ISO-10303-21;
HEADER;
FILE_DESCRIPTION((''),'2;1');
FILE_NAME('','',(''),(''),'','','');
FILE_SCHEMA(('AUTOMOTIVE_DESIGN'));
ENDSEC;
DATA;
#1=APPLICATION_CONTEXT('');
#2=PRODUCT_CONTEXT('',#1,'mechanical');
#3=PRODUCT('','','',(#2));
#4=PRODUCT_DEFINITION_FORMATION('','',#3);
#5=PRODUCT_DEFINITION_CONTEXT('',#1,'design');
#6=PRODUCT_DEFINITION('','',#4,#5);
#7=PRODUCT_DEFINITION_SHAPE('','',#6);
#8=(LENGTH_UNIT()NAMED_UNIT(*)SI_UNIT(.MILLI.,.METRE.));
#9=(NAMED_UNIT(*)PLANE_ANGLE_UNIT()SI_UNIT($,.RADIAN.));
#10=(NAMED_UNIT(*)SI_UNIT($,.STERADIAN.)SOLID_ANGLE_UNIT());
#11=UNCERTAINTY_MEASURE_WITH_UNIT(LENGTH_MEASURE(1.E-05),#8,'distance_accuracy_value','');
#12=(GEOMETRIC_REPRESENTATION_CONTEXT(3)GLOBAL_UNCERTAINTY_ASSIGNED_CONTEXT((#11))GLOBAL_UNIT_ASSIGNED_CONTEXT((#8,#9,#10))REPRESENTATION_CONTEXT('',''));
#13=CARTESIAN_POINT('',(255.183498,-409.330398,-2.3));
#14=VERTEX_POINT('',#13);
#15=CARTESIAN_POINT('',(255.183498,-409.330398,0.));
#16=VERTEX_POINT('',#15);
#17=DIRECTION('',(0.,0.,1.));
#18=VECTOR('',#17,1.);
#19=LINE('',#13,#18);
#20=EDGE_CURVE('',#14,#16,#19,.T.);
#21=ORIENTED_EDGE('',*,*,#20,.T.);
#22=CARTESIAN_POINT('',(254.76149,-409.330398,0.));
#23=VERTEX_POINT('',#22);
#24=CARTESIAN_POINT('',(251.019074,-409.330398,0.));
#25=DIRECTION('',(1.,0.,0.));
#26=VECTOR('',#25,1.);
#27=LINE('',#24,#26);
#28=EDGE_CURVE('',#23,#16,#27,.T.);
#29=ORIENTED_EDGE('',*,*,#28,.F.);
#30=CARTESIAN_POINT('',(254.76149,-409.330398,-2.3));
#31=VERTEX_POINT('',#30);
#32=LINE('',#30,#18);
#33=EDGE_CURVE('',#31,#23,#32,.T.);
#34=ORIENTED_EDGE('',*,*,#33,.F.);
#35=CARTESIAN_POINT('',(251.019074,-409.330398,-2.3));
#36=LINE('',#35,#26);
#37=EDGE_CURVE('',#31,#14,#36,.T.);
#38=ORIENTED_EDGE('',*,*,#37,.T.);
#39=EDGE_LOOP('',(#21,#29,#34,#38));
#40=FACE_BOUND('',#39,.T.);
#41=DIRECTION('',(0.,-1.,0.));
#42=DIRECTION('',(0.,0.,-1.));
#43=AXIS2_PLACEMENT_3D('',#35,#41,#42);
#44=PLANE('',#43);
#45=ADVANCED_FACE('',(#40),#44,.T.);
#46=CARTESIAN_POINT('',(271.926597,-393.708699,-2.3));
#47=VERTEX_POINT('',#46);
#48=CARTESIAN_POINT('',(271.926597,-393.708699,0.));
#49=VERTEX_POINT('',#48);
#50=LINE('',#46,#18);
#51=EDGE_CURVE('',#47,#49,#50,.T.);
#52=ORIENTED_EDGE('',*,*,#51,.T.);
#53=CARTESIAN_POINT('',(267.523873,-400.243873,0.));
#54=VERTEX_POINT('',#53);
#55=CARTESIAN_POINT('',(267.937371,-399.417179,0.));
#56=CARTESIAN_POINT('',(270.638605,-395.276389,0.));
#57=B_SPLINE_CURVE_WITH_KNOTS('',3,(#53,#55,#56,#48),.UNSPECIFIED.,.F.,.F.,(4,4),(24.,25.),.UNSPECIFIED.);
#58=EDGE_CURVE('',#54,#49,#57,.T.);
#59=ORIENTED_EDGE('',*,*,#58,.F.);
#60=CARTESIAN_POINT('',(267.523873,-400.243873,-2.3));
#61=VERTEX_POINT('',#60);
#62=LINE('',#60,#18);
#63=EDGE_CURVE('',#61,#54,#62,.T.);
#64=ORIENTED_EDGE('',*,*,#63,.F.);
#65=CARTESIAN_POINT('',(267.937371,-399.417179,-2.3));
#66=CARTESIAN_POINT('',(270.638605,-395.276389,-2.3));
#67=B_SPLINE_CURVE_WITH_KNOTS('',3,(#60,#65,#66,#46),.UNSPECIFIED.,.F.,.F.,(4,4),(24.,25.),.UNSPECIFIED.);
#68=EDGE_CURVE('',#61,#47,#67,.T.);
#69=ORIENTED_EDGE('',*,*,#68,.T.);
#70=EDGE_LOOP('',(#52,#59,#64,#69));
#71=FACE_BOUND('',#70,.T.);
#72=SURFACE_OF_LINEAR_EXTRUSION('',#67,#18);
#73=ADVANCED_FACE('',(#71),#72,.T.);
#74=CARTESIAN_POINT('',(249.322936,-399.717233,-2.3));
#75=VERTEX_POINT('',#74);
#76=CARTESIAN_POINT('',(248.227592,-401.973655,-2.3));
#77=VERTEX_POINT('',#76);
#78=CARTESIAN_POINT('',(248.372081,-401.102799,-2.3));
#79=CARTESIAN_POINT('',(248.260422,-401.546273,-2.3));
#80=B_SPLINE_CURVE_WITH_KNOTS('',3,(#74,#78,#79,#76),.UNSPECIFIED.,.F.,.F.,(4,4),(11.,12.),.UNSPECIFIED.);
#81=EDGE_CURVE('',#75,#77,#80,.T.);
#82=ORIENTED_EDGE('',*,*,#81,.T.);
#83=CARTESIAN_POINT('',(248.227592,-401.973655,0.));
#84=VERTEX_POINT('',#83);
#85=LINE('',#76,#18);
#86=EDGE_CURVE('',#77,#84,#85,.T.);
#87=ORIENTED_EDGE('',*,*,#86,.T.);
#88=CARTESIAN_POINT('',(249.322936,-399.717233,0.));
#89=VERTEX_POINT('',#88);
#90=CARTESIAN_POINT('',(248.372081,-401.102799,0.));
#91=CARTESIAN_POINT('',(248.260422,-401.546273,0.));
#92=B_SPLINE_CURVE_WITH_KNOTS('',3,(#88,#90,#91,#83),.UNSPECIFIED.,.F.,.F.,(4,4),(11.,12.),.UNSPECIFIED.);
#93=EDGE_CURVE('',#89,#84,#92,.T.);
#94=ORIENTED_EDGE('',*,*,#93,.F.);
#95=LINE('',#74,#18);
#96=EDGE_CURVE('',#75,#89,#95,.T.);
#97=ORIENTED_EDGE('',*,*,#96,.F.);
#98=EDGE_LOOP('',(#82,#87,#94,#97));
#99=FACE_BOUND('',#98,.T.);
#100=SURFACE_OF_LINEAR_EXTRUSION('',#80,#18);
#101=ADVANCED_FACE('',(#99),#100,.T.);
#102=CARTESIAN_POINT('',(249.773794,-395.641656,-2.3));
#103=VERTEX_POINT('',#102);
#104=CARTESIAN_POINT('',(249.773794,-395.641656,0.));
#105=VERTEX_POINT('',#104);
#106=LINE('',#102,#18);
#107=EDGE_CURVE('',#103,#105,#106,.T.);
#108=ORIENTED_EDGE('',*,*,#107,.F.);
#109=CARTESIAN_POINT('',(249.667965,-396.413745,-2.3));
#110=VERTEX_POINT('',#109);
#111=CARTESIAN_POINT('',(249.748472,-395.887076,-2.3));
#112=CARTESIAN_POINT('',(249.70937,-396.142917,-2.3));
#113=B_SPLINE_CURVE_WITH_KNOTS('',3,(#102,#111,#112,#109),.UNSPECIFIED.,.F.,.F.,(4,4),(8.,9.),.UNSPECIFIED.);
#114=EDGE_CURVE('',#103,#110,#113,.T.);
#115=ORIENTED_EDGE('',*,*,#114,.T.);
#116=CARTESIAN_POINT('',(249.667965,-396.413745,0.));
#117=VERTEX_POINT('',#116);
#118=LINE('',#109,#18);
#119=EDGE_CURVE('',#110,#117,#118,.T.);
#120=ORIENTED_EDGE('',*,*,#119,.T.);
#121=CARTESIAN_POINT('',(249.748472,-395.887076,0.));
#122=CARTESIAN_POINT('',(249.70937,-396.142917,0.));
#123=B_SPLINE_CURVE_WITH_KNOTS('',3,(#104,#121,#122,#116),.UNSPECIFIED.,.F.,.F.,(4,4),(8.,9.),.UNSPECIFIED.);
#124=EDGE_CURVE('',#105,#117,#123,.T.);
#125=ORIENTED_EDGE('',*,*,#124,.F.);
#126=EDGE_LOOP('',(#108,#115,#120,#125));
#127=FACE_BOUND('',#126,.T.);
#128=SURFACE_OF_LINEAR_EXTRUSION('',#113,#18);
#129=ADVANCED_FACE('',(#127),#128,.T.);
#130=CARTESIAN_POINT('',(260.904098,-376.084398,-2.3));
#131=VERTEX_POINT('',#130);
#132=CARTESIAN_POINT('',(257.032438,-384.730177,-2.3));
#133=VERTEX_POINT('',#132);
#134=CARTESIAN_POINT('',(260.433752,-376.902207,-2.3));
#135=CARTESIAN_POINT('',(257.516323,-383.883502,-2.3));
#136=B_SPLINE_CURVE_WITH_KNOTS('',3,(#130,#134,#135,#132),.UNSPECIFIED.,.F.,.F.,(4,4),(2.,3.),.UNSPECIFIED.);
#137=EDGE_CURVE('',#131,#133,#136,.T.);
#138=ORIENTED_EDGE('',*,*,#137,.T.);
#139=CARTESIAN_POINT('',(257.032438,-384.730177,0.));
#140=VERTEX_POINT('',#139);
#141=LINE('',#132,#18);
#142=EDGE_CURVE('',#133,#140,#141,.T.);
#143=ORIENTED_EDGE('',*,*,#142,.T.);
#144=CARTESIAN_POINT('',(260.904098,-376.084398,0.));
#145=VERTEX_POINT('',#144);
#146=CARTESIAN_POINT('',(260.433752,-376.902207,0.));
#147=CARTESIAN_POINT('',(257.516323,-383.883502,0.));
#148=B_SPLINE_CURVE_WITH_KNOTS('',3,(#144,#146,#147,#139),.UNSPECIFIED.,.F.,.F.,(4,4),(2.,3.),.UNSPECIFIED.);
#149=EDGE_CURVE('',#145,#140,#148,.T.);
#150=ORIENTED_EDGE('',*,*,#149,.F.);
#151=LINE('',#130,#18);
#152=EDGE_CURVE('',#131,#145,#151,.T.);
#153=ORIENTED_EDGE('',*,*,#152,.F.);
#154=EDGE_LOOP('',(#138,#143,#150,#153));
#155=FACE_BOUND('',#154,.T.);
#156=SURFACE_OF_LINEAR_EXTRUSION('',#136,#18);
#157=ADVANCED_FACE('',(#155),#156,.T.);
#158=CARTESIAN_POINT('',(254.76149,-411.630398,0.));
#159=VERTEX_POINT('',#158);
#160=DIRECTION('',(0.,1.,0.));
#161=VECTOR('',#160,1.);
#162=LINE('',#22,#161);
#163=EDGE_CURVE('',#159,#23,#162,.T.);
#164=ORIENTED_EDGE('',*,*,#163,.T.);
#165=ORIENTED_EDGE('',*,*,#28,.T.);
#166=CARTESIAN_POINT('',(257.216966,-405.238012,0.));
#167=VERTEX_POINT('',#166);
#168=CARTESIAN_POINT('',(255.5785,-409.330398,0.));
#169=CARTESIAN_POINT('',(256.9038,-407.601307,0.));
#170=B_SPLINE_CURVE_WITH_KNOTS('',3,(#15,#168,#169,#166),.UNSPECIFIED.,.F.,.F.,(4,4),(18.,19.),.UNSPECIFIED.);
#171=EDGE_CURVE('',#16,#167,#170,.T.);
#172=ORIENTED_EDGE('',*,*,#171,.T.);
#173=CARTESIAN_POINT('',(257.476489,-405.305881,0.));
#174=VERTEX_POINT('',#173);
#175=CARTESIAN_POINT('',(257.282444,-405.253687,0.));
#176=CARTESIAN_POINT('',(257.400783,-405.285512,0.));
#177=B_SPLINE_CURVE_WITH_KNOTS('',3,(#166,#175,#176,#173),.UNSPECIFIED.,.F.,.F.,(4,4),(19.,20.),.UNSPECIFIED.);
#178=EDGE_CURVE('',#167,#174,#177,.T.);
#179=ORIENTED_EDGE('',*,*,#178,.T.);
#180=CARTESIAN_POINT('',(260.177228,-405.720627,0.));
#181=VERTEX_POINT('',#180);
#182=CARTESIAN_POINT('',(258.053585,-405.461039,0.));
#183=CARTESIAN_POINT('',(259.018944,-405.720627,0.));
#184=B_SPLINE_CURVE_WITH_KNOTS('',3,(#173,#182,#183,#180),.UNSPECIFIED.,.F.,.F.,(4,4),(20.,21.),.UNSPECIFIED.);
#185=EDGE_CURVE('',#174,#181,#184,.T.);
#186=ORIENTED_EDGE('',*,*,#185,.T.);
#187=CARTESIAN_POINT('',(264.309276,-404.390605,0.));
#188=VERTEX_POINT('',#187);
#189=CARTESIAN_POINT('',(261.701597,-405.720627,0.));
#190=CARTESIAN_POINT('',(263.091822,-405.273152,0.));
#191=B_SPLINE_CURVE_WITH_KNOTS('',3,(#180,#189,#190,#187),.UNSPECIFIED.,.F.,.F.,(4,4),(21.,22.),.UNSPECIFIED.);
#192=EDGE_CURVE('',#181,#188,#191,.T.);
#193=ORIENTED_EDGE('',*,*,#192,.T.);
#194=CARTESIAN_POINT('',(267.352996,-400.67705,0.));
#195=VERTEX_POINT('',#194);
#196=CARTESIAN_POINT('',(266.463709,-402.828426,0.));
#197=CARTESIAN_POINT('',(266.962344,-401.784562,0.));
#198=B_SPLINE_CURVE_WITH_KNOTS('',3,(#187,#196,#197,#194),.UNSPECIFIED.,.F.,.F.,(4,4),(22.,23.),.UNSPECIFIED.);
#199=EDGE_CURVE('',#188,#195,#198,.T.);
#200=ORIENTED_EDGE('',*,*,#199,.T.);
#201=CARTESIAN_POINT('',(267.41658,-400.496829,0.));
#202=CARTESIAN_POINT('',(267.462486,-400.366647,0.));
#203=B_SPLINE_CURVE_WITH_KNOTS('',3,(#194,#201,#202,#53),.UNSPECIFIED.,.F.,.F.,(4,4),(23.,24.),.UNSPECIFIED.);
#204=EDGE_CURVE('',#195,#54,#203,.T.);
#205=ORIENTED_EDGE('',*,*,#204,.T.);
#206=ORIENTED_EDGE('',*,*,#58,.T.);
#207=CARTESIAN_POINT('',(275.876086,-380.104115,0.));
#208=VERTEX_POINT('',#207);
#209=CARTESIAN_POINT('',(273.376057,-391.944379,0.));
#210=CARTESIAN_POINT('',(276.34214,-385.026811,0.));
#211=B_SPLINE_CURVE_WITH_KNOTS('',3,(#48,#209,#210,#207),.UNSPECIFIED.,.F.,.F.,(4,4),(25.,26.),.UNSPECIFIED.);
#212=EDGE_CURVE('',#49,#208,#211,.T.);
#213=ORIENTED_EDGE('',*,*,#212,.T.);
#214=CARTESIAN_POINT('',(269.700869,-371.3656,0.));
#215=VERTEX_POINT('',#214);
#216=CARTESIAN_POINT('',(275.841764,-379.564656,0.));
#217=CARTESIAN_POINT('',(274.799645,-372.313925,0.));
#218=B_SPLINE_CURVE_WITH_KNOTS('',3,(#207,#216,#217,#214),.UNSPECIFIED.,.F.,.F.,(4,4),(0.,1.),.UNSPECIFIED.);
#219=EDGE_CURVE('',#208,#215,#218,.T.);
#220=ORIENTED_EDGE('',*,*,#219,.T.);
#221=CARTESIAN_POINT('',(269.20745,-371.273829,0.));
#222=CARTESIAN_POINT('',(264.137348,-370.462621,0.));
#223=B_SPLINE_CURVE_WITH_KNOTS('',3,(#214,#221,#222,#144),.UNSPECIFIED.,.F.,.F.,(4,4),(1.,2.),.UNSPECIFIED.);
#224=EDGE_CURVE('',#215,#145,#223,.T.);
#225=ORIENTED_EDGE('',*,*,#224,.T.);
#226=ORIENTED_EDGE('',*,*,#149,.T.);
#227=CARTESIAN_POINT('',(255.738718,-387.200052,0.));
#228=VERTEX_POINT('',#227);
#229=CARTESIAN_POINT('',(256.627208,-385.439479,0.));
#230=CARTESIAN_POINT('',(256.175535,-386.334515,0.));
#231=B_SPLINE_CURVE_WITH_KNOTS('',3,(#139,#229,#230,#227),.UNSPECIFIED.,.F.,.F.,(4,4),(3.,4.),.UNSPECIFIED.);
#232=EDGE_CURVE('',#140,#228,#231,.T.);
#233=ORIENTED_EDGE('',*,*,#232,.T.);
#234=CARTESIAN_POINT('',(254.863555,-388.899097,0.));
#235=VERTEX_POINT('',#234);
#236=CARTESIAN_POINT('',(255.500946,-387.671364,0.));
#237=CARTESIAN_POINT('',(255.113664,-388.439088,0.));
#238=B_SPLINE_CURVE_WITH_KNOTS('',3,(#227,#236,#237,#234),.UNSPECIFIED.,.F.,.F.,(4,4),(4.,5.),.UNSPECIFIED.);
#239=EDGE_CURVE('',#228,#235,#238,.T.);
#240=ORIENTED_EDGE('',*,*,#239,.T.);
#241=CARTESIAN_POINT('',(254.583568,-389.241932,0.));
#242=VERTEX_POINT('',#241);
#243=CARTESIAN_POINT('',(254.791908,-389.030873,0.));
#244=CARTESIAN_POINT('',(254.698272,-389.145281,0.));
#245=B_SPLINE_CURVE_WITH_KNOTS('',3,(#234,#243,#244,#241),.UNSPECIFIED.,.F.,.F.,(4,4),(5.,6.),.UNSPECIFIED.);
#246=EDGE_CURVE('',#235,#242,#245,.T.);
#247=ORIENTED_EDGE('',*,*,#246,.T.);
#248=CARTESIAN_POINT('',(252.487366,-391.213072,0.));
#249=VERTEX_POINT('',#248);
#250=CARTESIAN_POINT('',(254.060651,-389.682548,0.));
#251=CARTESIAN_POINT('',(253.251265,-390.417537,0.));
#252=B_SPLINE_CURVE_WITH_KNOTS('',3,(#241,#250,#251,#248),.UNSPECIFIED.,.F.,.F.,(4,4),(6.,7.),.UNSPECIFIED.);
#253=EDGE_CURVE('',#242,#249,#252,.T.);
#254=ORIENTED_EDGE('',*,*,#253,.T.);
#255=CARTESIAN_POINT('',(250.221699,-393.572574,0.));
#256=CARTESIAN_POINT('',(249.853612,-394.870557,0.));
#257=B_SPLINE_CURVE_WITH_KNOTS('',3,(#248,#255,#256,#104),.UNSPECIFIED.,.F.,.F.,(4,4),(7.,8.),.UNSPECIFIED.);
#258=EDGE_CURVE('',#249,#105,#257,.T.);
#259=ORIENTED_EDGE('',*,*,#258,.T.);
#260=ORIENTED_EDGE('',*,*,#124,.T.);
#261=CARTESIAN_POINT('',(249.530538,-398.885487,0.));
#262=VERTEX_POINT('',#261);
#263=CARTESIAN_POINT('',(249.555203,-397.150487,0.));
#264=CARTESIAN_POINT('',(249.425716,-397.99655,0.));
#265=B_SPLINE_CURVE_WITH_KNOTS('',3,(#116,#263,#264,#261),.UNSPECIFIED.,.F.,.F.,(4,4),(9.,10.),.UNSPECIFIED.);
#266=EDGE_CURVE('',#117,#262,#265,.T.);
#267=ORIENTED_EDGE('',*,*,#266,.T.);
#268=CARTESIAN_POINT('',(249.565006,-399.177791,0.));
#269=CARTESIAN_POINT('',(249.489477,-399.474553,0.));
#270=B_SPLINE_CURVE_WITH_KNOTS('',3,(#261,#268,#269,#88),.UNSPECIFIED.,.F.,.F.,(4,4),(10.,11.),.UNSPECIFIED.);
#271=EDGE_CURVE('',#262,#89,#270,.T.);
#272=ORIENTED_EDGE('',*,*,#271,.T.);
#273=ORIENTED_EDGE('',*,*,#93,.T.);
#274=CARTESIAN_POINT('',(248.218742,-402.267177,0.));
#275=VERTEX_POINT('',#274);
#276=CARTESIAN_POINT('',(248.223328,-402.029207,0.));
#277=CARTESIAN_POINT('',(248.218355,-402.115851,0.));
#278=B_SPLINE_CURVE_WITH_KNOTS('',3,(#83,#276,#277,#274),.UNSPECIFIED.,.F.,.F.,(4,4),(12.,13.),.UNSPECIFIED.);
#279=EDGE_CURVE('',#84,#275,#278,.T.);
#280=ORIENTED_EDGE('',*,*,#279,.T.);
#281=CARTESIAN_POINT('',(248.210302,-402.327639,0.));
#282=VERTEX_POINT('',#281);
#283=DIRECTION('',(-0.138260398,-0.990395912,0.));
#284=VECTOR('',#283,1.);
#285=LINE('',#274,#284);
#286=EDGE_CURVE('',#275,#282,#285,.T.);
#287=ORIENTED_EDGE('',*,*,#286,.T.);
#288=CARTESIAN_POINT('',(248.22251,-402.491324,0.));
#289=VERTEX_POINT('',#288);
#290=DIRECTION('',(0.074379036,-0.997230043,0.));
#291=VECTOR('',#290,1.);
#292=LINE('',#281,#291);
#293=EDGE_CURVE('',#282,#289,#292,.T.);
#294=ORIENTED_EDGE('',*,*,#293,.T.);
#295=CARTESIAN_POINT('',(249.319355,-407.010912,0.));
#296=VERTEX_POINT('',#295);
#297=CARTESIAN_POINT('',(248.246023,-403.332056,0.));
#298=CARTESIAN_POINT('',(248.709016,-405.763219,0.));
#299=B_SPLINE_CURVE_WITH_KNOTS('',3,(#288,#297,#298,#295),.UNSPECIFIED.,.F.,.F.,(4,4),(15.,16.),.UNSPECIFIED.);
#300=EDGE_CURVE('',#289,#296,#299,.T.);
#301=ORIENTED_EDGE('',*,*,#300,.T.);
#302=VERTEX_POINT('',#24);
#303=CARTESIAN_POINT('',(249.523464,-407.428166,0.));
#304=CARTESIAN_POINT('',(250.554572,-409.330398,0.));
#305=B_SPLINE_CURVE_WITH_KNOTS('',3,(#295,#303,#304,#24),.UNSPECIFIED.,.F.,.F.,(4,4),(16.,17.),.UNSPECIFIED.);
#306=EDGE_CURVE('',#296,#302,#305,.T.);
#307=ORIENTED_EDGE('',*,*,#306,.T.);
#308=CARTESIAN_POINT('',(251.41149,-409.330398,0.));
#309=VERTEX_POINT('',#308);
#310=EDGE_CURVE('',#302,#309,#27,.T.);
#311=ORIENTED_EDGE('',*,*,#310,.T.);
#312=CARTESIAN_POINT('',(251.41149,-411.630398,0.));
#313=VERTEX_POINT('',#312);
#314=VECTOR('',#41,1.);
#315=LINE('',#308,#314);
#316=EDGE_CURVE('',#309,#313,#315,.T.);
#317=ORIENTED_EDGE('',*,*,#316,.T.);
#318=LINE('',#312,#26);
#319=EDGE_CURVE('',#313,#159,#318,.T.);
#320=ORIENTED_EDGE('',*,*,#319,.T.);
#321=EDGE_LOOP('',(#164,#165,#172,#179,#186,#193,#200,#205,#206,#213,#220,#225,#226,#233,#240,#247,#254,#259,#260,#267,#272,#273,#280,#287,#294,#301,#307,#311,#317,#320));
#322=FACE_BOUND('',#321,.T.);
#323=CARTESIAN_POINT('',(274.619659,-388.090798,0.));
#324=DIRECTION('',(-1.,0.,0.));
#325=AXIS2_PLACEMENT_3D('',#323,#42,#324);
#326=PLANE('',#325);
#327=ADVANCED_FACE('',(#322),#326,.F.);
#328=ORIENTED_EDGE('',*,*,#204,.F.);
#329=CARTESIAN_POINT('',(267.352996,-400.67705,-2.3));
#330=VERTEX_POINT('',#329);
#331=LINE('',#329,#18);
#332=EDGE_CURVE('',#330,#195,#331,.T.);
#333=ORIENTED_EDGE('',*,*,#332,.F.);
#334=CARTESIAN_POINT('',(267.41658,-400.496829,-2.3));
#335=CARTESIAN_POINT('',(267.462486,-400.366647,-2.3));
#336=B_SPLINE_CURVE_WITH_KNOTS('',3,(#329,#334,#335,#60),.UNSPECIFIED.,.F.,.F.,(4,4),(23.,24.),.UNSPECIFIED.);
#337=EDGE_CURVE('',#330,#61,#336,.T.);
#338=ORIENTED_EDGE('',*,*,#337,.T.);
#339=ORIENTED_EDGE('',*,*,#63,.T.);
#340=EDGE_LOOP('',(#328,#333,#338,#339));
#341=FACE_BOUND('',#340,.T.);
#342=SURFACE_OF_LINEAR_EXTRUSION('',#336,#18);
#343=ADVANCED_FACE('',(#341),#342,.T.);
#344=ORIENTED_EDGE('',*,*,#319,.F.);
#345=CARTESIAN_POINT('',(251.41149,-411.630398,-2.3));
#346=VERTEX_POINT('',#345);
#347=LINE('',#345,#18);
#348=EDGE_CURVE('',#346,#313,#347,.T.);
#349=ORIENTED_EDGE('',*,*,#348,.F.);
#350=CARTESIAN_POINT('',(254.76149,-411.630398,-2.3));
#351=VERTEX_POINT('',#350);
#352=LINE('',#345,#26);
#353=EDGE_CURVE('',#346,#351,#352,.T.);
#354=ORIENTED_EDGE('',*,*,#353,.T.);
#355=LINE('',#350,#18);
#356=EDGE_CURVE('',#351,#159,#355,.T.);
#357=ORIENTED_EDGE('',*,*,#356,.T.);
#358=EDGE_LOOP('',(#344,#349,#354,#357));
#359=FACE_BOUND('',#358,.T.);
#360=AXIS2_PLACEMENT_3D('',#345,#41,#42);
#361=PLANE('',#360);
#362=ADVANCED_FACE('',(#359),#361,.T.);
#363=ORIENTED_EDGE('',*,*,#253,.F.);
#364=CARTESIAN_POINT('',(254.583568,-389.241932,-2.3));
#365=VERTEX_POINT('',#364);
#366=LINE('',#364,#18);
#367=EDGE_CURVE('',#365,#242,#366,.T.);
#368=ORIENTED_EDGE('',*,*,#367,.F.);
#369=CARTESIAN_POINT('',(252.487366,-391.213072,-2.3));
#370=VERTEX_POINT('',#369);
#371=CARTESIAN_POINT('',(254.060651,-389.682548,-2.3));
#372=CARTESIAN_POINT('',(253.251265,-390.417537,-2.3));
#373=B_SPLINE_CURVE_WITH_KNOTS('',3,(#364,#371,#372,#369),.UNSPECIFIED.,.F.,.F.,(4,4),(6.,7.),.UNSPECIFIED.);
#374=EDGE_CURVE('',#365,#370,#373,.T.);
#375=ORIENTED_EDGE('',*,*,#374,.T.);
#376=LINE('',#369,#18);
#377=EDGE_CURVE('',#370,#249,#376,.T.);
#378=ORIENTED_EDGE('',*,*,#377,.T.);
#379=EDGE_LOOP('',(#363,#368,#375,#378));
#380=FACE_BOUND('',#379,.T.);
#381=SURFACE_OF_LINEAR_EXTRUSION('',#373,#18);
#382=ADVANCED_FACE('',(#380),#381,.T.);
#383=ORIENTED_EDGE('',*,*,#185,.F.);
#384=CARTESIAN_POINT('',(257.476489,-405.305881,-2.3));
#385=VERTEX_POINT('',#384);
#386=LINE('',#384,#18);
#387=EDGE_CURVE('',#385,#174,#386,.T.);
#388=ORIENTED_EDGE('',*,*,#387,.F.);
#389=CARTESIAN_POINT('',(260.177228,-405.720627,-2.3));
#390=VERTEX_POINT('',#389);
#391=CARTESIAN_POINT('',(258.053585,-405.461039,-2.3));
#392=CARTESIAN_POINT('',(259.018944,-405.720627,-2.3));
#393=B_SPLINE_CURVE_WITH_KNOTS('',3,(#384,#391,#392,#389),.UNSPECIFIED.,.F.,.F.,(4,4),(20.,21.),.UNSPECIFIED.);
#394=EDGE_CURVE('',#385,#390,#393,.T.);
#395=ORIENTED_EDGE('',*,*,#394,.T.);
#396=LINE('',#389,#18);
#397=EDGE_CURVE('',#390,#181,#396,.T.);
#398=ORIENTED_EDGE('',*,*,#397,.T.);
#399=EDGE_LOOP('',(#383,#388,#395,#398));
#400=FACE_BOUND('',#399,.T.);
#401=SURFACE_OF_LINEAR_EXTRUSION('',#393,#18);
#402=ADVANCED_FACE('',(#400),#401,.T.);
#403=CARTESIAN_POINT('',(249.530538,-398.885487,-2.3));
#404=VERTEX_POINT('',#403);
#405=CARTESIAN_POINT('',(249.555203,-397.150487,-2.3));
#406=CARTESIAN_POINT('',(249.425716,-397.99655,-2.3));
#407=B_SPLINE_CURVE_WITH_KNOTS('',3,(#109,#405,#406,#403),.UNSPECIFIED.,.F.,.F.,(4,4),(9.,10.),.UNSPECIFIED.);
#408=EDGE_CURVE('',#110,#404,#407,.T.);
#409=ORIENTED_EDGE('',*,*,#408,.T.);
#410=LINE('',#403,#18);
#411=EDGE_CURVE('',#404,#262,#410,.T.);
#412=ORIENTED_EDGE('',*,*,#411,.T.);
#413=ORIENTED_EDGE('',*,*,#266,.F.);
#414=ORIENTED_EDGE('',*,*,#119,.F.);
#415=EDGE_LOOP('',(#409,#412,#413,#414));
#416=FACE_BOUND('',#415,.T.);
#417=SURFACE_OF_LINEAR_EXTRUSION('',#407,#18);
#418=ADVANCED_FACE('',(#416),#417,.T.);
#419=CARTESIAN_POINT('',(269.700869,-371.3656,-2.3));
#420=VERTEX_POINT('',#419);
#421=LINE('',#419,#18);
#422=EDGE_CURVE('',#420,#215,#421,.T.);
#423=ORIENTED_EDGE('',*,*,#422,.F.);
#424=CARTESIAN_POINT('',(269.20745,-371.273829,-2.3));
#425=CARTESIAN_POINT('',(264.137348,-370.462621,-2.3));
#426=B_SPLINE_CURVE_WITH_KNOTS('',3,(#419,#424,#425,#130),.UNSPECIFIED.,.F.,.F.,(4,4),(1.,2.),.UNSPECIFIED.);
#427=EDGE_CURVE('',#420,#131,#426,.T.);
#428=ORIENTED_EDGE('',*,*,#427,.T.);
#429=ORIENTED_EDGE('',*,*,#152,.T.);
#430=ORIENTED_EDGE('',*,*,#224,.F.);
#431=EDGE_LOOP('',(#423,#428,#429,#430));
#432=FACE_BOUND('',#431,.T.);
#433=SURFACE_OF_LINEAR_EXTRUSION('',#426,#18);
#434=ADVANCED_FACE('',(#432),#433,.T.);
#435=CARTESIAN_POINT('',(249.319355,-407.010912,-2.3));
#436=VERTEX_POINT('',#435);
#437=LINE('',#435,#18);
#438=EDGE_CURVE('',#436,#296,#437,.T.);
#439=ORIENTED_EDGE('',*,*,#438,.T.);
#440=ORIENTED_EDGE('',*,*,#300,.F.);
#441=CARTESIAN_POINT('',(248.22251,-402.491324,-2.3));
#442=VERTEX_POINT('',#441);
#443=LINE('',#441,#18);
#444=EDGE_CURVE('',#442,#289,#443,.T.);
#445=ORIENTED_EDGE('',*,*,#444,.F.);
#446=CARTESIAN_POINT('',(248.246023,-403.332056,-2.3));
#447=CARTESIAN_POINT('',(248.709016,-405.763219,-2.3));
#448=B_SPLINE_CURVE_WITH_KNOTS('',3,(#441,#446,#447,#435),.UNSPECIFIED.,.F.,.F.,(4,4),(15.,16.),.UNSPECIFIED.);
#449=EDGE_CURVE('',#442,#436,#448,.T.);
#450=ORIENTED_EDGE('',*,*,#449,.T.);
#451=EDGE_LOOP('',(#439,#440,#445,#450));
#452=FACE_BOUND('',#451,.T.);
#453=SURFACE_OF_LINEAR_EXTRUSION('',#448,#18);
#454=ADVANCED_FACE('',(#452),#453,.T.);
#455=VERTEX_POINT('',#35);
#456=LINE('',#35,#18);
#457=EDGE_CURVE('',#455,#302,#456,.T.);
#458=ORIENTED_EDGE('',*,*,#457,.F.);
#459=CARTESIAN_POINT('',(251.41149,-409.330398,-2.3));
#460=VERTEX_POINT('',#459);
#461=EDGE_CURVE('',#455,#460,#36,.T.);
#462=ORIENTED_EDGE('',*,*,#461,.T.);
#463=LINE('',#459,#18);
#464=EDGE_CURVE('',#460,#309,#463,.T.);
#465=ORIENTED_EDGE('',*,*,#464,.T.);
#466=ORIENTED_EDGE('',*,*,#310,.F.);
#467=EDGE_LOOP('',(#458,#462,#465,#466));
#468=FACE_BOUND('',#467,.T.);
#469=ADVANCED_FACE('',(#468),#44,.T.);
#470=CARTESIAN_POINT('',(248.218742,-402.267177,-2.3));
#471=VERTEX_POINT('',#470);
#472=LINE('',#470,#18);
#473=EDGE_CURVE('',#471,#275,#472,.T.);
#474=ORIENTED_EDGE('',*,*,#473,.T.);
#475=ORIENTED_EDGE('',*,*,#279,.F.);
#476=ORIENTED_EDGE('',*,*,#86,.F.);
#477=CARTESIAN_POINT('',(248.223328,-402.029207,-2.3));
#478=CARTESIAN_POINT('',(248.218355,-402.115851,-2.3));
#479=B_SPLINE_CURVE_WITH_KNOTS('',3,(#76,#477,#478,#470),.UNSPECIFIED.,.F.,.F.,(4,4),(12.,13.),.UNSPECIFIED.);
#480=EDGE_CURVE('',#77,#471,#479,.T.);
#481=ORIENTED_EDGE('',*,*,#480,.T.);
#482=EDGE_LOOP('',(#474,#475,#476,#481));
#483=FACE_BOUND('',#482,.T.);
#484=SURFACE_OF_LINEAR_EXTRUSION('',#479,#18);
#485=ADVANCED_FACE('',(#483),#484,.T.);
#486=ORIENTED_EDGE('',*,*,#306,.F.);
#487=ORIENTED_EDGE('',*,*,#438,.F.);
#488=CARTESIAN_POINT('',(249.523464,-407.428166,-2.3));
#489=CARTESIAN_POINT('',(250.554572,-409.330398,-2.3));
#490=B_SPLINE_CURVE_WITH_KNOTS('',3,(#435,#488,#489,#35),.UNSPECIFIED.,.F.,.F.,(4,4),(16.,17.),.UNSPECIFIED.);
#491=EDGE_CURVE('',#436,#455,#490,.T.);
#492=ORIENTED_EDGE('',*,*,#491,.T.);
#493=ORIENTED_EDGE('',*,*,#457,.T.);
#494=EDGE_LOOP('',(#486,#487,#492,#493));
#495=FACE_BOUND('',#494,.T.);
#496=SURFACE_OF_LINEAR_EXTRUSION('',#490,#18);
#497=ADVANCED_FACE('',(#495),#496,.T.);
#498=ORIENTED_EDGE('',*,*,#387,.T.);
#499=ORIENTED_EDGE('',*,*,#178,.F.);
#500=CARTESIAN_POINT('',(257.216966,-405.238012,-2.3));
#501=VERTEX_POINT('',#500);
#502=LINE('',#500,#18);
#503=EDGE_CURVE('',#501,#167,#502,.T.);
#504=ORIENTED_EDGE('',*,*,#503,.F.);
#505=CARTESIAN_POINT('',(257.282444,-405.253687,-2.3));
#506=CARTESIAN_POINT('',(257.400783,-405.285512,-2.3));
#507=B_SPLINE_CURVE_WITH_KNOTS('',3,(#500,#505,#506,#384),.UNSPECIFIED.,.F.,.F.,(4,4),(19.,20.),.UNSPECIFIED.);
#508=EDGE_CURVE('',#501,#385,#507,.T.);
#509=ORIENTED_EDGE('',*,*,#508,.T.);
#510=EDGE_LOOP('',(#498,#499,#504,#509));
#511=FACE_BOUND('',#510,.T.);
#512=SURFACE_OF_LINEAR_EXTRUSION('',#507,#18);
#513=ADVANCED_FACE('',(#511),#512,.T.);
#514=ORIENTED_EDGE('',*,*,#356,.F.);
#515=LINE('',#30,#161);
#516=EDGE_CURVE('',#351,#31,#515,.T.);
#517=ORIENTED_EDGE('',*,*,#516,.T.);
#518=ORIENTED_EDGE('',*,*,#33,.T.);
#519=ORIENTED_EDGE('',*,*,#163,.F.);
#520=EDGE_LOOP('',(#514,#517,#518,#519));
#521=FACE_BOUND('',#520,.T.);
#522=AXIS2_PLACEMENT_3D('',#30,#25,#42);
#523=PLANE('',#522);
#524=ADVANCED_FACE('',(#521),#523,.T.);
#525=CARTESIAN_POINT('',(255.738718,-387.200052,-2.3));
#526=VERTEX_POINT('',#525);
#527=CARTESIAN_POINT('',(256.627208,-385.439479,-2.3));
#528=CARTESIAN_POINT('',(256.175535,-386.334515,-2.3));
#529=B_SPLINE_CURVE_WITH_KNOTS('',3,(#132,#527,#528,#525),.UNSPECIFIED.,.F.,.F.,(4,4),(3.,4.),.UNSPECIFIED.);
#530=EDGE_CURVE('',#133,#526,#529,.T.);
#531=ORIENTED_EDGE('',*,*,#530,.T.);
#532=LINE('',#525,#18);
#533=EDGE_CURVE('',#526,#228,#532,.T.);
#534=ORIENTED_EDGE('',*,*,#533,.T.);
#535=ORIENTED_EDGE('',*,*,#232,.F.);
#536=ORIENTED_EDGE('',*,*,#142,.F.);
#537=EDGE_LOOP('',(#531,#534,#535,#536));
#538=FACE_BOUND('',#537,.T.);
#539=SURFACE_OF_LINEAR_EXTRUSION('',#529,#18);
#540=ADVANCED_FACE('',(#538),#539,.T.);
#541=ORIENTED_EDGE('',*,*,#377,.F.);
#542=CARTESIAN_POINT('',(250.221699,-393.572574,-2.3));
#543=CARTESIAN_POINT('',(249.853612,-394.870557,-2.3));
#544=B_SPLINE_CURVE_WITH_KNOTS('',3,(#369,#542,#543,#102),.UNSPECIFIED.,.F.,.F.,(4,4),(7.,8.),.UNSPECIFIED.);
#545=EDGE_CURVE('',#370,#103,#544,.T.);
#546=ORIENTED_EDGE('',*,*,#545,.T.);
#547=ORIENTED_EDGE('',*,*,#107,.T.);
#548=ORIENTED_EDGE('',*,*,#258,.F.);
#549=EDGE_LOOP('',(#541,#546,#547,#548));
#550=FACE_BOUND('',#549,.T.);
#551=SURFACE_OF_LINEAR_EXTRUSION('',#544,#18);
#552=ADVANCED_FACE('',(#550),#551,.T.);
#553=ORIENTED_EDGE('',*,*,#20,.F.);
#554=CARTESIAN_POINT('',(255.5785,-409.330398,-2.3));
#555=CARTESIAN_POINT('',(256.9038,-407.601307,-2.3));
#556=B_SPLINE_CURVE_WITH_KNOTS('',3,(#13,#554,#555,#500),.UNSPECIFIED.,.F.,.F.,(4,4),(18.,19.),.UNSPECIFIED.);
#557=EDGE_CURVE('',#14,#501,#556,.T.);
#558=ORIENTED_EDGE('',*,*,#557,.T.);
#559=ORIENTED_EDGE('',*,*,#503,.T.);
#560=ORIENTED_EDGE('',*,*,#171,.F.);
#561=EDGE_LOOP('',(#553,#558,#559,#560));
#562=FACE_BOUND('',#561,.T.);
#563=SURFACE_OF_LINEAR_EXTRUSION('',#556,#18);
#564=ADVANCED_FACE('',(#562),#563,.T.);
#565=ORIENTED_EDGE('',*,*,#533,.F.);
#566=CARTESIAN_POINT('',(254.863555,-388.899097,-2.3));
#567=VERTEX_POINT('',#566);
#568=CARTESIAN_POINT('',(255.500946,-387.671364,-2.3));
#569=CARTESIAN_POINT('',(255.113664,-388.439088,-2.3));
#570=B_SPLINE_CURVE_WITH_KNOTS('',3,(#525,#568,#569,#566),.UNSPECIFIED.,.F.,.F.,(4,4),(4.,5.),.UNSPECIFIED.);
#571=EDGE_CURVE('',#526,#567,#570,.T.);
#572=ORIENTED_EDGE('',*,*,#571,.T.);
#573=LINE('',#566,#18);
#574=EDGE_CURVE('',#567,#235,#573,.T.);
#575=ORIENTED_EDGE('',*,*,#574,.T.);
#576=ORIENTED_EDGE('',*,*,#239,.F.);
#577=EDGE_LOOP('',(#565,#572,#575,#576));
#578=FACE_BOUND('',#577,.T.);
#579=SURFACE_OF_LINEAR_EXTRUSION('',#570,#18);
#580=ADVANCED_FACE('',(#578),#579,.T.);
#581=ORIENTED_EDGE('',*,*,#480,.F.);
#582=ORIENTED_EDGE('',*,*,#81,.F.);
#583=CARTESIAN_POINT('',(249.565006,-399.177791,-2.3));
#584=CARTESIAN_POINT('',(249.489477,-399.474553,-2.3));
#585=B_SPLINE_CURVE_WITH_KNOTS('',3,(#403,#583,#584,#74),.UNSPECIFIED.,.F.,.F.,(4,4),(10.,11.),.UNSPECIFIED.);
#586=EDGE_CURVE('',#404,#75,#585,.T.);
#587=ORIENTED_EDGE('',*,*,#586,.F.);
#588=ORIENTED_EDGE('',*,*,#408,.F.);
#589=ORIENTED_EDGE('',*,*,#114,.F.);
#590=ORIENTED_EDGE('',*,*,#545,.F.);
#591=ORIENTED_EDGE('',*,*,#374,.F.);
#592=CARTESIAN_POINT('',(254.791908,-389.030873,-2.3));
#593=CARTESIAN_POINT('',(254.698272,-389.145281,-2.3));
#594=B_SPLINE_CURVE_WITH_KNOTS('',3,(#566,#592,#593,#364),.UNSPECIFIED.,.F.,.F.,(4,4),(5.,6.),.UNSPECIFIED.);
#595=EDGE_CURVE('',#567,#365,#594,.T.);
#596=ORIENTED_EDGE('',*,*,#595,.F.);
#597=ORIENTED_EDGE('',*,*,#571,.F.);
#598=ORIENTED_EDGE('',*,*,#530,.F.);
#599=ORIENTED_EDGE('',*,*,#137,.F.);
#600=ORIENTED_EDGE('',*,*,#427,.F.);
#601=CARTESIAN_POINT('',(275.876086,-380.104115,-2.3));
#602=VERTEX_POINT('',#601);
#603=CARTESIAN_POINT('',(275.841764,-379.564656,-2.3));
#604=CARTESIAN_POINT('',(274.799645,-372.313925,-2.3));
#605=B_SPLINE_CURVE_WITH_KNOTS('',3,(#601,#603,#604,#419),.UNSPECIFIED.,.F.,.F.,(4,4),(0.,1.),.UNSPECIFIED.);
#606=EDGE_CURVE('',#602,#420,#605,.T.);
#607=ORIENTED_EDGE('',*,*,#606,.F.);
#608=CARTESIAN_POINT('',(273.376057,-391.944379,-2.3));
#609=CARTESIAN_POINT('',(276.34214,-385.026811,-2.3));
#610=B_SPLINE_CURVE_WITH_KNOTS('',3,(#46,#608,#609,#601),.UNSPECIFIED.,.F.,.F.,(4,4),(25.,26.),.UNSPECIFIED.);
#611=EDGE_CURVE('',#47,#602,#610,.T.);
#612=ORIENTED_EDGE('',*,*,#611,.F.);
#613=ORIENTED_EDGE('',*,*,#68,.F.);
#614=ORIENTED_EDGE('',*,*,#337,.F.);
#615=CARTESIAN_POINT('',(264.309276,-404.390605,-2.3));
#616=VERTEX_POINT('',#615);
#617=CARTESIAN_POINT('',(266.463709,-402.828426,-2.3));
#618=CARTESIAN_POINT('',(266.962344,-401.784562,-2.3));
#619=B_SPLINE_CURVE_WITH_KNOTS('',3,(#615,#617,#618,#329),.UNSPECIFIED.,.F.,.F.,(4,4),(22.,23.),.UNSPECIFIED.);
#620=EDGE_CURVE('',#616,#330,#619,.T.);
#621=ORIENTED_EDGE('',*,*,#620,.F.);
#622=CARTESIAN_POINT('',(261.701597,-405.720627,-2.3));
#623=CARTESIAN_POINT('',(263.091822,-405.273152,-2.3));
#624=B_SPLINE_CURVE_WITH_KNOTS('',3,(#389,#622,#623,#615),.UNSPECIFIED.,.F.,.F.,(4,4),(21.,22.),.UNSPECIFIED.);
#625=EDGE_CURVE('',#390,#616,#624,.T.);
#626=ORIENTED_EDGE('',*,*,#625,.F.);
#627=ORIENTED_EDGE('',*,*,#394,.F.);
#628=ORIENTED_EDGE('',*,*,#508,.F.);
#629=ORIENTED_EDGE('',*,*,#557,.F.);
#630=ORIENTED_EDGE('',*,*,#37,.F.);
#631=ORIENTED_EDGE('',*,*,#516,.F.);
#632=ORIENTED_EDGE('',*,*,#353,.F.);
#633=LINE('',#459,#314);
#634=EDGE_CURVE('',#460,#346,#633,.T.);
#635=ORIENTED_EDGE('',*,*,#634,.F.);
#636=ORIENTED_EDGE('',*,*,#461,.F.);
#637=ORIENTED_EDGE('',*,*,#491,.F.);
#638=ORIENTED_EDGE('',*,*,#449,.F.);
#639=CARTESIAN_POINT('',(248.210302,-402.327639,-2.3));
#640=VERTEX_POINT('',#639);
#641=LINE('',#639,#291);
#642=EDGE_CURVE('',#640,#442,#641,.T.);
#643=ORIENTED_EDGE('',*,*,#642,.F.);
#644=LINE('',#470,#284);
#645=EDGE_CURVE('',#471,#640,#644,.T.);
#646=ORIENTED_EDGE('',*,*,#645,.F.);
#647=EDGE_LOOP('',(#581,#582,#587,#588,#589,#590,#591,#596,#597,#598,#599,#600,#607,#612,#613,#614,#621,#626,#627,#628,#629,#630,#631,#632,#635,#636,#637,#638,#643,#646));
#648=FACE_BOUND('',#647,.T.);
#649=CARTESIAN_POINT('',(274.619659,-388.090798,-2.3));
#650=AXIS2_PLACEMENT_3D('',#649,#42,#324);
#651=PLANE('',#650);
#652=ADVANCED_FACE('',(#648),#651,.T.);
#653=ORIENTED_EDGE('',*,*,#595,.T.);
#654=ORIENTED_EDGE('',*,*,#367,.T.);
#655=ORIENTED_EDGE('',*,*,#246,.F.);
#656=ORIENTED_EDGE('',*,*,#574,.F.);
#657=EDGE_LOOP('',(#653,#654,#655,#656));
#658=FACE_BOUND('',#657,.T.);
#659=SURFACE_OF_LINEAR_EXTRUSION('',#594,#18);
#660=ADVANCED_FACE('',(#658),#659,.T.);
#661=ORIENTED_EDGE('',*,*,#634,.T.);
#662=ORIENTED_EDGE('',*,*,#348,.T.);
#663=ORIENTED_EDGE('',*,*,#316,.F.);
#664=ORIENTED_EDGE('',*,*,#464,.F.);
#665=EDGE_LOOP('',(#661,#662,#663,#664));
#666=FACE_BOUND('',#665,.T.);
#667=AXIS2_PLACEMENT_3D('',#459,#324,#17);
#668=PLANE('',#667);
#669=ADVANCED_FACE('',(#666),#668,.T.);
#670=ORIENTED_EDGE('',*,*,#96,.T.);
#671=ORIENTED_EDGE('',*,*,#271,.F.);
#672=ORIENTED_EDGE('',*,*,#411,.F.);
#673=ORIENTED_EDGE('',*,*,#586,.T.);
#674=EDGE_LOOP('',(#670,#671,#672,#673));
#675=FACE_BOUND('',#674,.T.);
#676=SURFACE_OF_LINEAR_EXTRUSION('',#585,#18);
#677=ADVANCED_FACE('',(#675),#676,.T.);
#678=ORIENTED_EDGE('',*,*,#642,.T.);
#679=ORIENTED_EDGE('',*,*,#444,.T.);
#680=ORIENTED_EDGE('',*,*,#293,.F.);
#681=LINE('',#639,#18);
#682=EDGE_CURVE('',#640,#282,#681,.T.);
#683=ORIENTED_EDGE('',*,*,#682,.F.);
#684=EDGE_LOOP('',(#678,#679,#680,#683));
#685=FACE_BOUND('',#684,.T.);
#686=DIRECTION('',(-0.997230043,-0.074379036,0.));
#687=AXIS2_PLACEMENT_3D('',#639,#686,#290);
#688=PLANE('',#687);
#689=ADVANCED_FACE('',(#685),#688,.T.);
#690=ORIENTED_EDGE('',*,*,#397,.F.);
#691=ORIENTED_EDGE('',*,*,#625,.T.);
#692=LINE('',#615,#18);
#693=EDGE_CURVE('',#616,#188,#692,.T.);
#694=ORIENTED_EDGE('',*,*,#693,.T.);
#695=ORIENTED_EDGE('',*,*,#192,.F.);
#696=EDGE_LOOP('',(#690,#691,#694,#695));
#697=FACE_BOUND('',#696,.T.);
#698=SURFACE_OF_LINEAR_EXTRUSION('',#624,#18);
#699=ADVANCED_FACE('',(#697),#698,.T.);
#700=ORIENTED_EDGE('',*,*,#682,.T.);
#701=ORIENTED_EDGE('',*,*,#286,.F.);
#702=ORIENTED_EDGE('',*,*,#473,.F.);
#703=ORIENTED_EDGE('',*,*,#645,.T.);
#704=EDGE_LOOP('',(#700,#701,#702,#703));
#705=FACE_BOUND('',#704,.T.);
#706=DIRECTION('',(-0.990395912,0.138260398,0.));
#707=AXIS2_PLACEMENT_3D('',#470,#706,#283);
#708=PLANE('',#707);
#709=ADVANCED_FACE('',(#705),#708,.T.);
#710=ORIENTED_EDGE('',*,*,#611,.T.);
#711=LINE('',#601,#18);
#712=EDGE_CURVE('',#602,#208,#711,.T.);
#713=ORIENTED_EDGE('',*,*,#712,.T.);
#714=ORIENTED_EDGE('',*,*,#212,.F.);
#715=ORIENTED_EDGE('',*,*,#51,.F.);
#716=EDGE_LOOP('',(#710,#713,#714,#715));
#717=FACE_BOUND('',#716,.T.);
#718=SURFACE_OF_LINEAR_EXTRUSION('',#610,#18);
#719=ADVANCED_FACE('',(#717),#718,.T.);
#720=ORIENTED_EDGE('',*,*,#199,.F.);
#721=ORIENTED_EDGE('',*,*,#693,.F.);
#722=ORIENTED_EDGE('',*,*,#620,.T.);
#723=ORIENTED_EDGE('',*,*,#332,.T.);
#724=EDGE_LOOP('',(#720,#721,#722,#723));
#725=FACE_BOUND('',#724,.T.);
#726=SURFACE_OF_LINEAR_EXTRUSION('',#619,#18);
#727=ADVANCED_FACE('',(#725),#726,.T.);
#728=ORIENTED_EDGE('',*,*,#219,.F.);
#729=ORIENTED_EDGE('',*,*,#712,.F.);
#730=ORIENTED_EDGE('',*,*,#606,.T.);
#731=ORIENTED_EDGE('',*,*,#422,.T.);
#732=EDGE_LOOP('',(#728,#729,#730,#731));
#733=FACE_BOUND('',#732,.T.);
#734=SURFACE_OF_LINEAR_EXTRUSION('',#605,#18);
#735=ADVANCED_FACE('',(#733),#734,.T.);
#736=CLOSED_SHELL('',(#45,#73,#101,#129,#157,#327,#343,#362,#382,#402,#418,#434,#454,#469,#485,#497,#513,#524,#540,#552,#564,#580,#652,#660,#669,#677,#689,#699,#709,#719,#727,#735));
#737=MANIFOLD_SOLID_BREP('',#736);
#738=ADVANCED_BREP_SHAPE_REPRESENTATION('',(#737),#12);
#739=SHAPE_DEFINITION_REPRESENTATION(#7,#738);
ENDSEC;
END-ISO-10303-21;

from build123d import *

# Parameters (mm, degrees)
BASE_FLANGE1_DEPTH = 2.3
SKETCH6_W          = 3.35
SKETCH6_H          = 2.3
TAB1_DEPTH         = 2.3


# Sheet-metal steps are written as plain solids
with BuildPart() as part:
    # Model → Base-Flange1 (new body)
    with BuildSketch(Plane.XY):
        with BuildLine():
            Line((248.218742139, -402.267177227), (248.210301655, -402.327638653))
            Line((248.210301655, -402.327638653), (248.222510212, -402.491323752))
            add(Edge.make_bspline(
                [(248.222510212, -402.491323752), (248.246022989, -403.332056241), (248.70901563, -405.763218763), (249.319354503, -407.010912211)],
                knots=[15, 15, 15, 15, 16, 16, 16, 16], degree=3))
            add(Edge.make_bspline(
                [(249.319354503, -407.010912211), (249.523464167, -407.428166136), (250.554572065, -409.330398118), (251.019073512, -409.330398118)],
                knots=[16, 16, 16, 16, 17, 17, 17, 17], degree=3))
            Line((251.019073512, -409.330398118), (255.183497951, -409.330398118))
            add(Edge.make_bspline(
                [(255.183497951, -409.330398118), (255.57849992, -409.330398118), (256.903800339, -407.601307276), (257.216965505, -405.238012255)],
                knots=[18, 18, 18, 18, 19, 19, 19, 19], degree=3))
            add(Edge.make_bspline(
                [(257.216965505, -405.238012255), (257.282443851, -405.253687439), (257.400782881, -405.285511509), (257.476488854, -405.305880636)],
                knots=[19, 19, 19, 19, 20, 20, 20, 20], degree=3))
            add(Edge.make_bspline(
                [(257.476488854, -405.305880636), (258.053585412, -405.461039124), (259.01894423, -405.720627069), (260.177228396, -405.720627069)],
                knots=[20, 20, 20, 20, 21, 21, 21, 21], degree=3))
            add(Edge.make_bspline(
                [(260.177228396, -405.720627069), (261.701597021, -405.720627069), (263.091822241, -405.273152229), (264.309275921, -404.390604893)],
                knots=[21, 21, 21, 21, 22, 22, 22, 22], degree=3))
            add(Edge.make_bspline(
                [(264.309275921, -404.390604893), (266.463709447, -402.828426345), (266.962343955, -401.784562413), (267.352996251, -400.677050342)],
                knots=[22, 22, 22, 22, 23, 23, 23, 23], degree=3))
            add(Edge.make_bspline(
                [(267.352996251, -400.677050342), (267.416579794, -400.496828784), (267.462485692, -400.366647239), (267.523872987, -400.243872648)],
                knots=[23, 23, 23, 23, 24, 24, 24, 24], degree=3))
            add(Edge.make_bspline(
                [(267.523872987, -400.243872648), (267.937370572, -399.417178923), (270.638605347, -395.276389468), (271.926597358, -393.708698768)],
                knots=[24, 24, 24, 24, 25, 25, 25, 25], degree=3))
            add(Edge.make_bspline(
                [(271.926597358, -393.708698768), (273.376056688, -391.944379242), (276.34214037, -385.026811485), (275.876086264, -380.104114983)],
                knots=[25, 25, 25, 25, 26, 26, 26, 26], degree=3))
            add(Edge.make_bspline(
                [(275.876086264, -380.104114983), (275.8417645, -379.564656094), (274.799645491, -372.313924687), (269.70086935, -371.365600484)],
                knots=[0, 0, 0, 0, 1, 1, 1, 1], degree=3))
            add(Edge.make_bspline(
                [(269.70086935, -371.365600484), (269.207450344, -371.273829209), (264.137348452, -370.462620652), (260.904098088, -376.084398314)],
                knots=[1, 1, 1, 1, 2, 2, 2, 2], degree=3))
            add(Edge.make_bspline(
                [(260.904098088, -376.084398314), (260.433751909, -376.902207435), (257.516322771, -383.883501762), (257.032437578, -384.730177041)],
                knots=[2, 2, 2, 2, 3, 3, 3, 3], degree=3))
            add(Edge.make_bspline(
                [(257.032437578, -384.730177041), (256.627208222, -385.439479138), (256.175534672, -386.334514945), (255.738718096, -387.200052122)],
                knots=[3, 3, 3, 3, 4, 4, 4, 4], degree=3))
            add(Edge.make_bspline(
                [(255.738718096, -387.200052122), (255.500946273, -387.671364299), (255.11366392, -388.439088056), (254.863555112, -388.899096881)],
                knots=[4, 4, 4, 4, 5, 5, 5, 5], degree=3))
            add(Edge.make_bspline(
                [(254.863555112, -388.899096881), (254.791907734, -389.030873232), (254.698271896, -389.145280785), (254.58356807, -389.241931628)],
                knots=[5, 5, 5, 5, 6, 6, 6, 6], degree=3))
            add(Edge.make_bspline(
                [(254.58356807, -389.241931628), (254.060651196, -389.68254776), (253.251264748, -390.417536599), (252.487366168, -391.213071598)],
                knots=[6, 6, 6, 6, 7, 7, 7, 7], degree=3))
            add(Edge.make_bspline(
                [(252.487366168, -391.213071598), (250.221699122, -393.572574432), (249.853612202, -394.87055722), (249.773793646, -395.641655717)],
                knots=[7, 7, 7, 7, 8, 8, 8, 8], degree=3))
            add(Edge.make_bspline(
                [(249.773793646, -395.641655717), (249.748472194, -395.887075707), (249.70937036, -396.14291711), (249.667964619, -396.413744679)],
                knots=[8, 8, 8, 8, 9, 9, 9, 9], degree=3))
            add(Edge.make_bspline(
                [(249.667964619, -396.413744679), (249.5552028, -397.150487356), (249.42571589, -397.996549574), (249.530537872, -398.885487222)],
                knots=[9, 9, 9, 9, 10, 10, 10, 10], degree=3))
            add(Edge.make_bspline(
                [(249.530537872, -398.885487222), (249.565005835, -399.177791085), (249.489477062, -399.47455308), (249.322935943, -399.717233208)],
                knots=[10, 10, 10, 10, 11, 11, 11, 11], degree=3))
            add(Edge.make_bspline(
                [(249.322935943, -399.717233208), (248.372080781, -401.102798846), (248.260421691, -401.546272976), (248.227591728, -401.973655092)],
                knots=[11, 11, 11, 11, 12, 12, 12, 12], degree=3))
            add(Edge.make_bspline(
                [(248.227591728, -401.973655092), (248.223328422, -402.029207256), (248.218354566, -402.115851408), (248.218742139, -402.267177227)],
                knots=[12, 12, 12, 12, 13, 13, 13, 13], degree=3))
        make_face()
    extrude(amount=-BASE_FLANGE1_DEPTH)

    # Sketch6 → Tab1 (add)
    with BuildSketch(Plane.XY):
        with Locations((253.086490394, -410.480398118)):
            Rectangle(SKETCH6_W, SKETCH6_H)
    extrude(amount=-TAB1_DEPTH)


solid = part.part
